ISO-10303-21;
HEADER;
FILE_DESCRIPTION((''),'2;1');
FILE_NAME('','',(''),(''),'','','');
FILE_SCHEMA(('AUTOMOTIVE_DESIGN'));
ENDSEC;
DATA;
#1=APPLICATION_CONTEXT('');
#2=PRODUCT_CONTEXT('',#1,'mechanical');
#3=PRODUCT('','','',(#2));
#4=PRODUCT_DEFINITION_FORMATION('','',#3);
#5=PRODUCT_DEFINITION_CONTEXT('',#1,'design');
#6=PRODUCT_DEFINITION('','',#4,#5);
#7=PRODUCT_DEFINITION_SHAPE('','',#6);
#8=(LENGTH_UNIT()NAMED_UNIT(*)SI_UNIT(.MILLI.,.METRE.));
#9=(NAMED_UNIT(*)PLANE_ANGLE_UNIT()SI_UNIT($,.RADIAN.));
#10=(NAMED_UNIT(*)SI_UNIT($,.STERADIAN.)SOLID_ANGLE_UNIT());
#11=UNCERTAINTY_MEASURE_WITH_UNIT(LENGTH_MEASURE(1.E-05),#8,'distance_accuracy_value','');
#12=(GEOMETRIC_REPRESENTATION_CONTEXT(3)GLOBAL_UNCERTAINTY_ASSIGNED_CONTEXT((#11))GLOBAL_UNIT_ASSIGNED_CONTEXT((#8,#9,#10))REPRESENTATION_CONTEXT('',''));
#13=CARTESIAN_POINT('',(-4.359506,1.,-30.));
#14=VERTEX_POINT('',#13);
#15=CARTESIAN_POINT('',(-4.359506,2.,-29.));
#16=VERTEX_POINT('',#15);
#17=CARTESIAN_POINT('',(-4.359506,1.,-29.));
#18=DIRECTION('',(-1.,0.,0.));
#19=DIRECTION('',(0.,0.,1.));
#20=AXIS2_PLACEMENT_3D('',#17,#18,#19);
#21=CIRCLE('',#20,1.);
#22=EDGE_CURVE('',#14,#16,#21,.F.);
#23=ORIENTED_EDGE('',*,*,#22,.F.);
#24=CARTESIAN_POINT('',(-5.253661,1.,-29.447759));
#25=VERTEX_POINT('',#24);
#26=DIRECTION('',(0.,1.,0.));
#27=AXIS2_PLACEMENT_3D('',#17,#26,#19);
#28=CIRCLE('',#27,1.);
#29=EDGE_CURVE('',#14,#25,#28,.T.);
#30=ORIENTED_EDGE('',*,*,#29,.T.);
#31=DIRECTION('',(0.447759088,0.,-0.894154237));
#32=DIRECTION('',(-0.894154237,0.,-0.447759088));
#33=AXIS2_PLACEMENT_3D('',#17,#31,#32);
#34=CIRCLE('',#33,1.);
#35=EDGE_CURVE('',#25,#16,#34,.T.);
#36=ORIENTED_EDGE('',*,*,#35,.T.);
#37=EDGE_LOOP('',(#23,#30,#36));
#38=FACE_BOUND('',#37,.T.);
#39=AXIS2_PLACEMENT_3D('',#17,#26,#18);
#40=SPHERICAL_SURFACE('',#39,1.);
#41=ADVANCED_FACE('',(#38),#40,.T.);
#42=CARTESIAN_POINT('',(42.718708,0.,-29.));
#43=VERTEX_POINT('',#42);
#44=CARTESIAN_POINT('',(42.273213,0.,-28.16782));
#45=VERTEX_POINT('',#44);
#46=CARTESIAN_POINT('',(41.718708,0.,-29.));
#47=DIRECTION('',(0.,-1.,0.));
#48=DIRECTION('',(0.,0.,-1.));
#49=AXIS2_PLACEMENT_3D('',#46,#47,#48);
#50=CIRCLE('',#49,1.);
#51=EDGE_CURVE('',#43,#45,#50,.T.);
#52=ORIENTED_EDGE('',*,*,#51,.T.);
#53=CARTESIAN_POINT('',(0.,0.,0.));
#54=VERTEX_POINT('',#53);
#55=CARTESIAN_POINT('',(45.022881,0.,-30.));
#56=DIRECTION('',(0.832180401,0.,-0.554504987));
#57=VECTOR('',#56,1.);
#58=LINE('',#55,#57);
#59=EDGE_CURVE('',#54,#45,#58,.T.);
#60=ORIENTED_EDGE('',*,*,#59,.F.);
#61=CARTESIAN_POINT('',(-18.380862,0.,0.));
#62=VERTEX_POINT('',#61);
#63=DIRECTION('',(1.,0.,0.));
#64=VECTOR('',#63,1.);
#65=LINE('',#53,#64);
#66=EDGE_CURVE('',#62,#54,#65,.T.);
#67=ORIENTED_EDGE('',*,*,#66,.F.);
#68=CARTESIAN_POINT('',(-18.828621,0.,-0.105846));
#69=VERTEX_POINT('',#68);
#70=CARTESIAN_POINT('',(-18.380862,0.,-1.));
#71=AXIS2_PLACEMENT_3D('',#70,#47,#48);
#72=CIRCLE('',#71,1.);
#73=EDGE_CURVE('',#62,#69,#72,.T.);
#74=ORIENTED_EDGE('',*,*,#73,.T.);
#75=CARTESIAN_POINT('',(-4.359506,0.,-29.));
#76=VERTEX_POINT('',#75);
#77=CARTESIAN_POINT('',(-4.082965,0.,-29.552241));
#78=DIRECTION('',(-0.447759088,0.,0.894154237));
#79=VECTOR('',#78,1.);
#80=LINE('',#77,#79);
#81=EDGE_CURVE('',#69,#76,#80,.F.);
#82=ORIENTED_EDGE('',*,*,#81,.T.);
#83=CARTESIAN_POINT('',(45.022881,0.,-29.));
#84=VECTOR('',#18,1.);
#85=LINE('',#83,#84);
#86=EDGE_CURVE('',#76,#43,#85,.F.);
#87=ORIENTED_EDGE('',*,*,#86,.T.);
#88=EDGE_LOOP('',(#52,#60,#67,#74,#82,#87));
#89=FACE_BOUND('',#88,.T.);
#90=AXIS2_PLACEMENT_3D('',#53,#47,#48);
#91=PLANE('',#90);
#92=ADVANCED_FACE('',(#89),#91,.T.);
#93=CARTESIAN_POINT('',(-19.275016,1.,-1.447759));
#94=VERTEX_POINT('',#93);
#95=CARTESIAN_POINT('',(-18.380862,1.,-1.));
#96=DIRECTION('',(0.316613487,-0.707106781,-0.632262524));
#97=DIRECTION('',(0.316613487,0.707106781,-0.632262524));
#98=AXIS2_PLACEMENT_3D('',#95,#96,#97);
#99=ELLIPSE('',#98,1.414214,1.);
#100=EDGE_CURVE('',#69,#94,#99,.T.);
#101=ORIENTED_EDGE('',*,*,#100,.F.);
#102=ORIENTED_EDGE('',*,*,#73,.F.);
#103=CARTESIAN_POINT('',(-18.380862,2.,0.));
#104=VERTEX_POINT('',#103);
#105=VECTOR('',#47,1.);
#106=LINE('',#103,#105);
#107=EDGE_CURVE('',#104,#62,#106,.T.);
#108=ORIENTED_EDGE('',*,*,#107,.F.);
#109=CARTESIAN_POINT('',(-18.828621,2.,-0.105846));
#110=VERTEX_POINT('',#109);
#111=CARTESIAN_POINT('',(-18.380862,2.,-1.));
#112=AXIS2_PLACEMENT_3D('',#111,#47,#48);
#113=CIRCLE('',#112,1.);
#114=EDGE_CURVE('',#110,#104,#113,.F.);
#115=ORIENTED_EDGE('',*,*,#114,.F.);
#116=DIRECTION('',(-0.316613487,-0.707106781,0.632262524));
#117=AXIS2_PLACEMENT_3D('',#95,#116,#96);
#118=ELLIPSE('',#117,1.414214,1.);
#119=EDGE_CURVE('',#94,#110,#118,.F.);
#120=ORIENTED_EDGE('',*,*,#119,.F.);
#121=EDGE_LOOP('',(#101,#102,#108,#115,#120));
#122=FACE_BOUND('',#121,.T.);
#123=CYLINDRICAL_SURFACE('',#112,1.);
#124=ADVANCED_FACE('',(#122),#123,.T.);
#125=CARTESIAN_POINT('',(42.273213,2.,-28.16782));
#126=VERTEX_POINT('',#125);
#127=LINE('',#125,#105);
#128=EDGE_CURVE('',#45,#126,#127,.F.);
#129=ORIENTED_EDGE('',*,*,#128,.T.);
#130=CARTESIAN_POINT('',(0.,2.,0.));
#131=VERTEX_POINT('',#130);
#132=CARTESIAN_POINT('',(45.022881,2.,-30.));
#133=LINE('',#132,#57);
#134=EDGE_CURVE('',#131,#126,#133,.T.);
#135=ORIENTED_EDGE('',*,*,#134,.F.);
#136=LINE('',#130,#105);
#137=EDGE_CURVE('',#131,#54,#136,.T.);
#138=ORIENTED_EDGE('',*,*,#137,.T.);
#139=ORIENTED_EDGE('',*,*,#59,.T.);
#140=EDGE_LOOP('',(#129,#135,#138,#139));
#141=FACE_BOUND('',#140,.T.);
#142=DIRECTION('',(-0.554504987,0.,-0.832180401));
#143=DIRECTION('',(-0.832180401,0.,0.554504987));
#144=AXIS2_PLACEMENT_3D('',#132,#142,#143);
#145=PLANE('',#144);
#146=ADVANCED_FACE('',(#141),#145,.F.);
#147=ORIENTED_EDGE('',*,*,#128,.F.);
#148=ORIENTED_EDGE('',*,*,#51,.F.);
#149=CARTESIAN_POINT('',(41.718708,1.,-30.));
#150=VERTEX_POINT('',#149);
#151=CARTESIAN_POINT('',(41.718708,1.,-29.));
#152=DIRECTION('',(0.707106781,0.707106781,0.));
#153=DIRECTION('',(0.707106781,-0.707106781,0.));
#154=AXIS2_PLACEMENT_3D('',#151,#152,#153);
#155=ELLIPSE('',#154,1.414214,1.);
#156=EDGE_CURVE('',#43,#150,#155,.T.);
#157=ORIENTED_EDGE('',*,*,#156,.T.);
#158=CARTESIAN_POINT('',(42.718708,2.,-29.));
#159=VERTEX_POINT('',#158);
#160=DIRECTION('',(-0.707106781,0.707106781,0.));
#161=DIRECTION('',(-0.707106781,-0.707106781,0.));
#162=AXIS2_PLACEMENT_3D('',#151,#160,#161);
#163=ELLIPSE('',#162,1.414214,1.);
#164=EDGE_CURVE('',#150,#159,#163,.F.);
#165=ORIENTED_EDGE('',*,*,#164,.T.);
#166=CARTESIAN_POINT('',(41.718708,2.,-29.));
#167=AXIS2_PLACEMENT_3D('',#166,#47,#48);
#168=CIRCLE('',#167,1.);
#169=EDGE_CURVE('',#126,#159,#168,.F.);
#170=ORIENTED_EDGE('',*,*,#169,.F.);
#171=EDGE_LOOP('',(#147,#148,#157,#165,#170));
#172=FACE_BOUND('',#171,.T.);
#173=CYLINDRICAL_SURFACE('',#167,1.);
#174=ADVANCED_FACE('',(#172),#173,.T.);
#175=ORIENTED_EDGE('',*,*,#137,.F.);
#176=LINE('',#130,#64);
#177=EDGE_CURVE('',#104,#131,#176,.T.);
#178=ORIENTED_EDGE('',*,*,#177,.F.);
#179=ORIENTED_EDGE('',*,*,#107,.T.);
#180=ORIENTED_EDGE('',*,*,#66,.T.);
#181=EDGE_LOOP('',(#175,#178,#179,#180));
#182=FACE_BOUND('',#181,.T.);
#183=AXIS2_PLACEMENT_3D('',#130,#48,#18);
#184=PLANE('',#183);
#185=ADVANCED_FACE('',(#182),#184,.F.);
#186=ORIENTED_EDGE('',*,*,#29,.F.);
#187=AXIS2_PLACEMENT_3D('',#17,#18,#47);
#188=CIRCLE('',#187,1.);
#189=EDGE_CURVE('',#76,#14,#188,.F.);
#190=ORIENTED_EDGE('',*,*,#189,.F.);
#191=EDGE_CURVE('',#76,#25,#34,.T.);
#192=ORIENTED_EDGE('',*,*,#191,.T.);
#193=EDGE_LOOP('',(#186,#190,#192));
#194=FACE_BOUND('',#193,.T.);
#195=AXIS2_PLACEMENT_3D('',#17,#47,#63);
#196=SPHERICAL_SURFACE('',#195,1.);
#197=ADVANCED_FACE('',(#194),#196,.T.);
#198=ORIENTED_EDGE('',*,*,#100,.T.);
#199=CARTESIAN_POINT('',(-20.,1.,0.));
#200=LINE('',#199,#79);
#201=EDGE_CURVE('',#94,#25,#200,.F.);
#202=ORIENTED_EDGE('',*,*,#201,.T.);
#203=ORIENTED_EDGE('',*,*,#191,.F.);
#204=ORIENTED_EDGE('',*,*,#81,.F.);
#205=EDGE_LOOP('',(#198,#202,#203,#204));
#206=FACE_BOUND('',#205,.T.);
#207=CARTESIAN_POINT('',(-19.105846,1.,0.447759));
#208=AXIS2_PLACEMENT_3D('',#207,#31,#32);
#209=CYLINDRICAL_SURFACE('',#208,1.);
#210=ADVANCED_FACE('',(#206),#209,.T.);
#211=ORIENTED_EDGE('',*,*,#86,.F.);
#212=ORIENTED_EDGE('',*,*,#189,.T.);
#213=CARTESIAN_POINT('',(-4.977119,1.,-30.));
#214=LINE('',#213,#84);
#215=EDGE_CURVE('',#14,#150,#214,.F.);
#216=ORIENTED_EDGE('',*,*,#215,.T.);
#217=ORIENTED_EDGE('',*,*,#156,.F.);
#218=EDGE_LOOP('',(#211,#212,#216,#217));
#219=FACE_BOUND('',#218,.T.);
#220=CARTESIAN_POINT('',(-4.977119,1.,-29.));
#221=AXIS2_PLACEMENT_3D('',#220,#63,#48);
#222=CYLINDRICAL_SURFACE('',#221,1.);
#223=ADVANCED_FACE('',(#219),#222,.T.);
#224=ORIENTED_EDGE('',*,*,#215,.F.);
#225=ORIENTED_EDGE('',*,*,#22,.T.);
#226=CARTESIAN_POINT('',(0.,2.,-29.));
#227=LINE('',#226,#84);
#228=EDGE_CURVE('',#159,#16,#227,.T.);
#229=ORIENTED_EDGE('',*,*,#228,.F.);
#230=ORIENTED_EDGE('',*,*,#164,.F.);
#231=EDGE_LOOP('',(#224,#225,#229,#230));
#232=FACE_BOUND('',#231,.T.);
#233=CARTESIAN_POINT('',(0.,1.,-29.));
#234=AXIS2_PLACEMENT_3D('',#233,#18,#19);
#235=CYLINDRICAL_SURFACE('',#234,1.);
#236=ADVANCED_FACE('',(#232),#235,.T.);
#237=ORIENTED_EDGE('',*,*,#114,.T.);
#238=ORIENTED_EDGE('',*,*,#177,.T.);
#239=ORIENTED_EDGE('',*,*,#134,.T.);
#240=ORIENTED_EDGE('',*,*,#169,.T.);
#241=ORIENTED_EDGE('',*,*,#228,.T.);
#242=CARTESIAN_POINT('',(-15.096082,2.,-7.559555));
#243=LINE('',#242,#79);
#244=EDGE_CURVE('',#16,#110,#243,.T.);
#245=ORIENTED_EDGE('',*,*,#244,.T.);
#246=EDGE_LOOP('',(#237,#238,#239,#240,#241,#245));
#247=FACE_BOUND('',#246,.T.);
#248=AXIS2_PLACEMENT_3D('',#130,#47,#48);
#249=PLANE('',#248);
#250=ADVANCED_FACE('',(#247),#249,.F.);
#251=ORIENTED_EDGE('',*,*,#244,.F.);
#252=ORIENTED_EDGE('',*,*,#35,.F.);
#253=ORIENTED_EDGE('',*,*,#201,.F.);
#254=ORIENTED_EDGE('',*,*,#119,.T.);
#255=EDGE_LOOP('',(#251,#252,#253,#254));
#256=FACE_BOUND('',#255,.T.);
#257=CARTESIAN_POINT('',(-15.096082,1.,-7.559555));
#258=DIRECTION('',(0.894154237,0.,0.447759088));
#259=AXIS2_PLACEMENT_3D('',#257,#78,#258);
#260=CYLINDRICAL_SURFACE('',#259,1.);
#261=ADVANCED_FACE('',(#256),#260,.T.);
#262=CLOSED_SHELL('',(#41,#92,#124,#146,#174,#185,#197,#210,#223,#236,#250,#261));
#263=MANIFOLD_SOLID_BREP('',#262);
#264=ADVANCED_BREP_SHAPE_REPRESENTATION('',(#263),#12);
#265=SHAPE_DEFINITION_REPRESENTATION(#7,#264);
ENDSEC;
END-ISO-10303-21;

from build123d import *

# Parameters (mm, degrees)
BOSS_EXTRUDE1_DEPTH = 2
FILLET2_R           = 1


with BuildPart() as part:
    # Sketch1 → Boss-Extrude1 (new body)
    with BuildSketch(Plane(origin=(0, 0, 0), x_dir=(1, 0, 0), z_dir=(0, 1, 0))):
        Polygon((0, 0), (-20, 0), (-4.977119068, 30), (45.022880932, 30), align=None)
    extrude(amount=BOSS_EXTRUDE1_DEPTH)

    # Fillet2
    fillet2_edges = [part.edges().sort_by_distance(p)[0] for p in [
        (-12.488559534, 2, -15),
        (-12.488559534, 0, -15),
        (20.022880932, 0, -30),
        (-20, 1, 0),
        (-4.977119068, 1, -30),
        (45.022880932, 1, -30),
        (20.022880932, 2, -30),
    ]]
    fillet(fillet2_edges, radius=FILLET2_R - 0.0001)  # a hair under: the kernel refuses the full size


solid = part.part
